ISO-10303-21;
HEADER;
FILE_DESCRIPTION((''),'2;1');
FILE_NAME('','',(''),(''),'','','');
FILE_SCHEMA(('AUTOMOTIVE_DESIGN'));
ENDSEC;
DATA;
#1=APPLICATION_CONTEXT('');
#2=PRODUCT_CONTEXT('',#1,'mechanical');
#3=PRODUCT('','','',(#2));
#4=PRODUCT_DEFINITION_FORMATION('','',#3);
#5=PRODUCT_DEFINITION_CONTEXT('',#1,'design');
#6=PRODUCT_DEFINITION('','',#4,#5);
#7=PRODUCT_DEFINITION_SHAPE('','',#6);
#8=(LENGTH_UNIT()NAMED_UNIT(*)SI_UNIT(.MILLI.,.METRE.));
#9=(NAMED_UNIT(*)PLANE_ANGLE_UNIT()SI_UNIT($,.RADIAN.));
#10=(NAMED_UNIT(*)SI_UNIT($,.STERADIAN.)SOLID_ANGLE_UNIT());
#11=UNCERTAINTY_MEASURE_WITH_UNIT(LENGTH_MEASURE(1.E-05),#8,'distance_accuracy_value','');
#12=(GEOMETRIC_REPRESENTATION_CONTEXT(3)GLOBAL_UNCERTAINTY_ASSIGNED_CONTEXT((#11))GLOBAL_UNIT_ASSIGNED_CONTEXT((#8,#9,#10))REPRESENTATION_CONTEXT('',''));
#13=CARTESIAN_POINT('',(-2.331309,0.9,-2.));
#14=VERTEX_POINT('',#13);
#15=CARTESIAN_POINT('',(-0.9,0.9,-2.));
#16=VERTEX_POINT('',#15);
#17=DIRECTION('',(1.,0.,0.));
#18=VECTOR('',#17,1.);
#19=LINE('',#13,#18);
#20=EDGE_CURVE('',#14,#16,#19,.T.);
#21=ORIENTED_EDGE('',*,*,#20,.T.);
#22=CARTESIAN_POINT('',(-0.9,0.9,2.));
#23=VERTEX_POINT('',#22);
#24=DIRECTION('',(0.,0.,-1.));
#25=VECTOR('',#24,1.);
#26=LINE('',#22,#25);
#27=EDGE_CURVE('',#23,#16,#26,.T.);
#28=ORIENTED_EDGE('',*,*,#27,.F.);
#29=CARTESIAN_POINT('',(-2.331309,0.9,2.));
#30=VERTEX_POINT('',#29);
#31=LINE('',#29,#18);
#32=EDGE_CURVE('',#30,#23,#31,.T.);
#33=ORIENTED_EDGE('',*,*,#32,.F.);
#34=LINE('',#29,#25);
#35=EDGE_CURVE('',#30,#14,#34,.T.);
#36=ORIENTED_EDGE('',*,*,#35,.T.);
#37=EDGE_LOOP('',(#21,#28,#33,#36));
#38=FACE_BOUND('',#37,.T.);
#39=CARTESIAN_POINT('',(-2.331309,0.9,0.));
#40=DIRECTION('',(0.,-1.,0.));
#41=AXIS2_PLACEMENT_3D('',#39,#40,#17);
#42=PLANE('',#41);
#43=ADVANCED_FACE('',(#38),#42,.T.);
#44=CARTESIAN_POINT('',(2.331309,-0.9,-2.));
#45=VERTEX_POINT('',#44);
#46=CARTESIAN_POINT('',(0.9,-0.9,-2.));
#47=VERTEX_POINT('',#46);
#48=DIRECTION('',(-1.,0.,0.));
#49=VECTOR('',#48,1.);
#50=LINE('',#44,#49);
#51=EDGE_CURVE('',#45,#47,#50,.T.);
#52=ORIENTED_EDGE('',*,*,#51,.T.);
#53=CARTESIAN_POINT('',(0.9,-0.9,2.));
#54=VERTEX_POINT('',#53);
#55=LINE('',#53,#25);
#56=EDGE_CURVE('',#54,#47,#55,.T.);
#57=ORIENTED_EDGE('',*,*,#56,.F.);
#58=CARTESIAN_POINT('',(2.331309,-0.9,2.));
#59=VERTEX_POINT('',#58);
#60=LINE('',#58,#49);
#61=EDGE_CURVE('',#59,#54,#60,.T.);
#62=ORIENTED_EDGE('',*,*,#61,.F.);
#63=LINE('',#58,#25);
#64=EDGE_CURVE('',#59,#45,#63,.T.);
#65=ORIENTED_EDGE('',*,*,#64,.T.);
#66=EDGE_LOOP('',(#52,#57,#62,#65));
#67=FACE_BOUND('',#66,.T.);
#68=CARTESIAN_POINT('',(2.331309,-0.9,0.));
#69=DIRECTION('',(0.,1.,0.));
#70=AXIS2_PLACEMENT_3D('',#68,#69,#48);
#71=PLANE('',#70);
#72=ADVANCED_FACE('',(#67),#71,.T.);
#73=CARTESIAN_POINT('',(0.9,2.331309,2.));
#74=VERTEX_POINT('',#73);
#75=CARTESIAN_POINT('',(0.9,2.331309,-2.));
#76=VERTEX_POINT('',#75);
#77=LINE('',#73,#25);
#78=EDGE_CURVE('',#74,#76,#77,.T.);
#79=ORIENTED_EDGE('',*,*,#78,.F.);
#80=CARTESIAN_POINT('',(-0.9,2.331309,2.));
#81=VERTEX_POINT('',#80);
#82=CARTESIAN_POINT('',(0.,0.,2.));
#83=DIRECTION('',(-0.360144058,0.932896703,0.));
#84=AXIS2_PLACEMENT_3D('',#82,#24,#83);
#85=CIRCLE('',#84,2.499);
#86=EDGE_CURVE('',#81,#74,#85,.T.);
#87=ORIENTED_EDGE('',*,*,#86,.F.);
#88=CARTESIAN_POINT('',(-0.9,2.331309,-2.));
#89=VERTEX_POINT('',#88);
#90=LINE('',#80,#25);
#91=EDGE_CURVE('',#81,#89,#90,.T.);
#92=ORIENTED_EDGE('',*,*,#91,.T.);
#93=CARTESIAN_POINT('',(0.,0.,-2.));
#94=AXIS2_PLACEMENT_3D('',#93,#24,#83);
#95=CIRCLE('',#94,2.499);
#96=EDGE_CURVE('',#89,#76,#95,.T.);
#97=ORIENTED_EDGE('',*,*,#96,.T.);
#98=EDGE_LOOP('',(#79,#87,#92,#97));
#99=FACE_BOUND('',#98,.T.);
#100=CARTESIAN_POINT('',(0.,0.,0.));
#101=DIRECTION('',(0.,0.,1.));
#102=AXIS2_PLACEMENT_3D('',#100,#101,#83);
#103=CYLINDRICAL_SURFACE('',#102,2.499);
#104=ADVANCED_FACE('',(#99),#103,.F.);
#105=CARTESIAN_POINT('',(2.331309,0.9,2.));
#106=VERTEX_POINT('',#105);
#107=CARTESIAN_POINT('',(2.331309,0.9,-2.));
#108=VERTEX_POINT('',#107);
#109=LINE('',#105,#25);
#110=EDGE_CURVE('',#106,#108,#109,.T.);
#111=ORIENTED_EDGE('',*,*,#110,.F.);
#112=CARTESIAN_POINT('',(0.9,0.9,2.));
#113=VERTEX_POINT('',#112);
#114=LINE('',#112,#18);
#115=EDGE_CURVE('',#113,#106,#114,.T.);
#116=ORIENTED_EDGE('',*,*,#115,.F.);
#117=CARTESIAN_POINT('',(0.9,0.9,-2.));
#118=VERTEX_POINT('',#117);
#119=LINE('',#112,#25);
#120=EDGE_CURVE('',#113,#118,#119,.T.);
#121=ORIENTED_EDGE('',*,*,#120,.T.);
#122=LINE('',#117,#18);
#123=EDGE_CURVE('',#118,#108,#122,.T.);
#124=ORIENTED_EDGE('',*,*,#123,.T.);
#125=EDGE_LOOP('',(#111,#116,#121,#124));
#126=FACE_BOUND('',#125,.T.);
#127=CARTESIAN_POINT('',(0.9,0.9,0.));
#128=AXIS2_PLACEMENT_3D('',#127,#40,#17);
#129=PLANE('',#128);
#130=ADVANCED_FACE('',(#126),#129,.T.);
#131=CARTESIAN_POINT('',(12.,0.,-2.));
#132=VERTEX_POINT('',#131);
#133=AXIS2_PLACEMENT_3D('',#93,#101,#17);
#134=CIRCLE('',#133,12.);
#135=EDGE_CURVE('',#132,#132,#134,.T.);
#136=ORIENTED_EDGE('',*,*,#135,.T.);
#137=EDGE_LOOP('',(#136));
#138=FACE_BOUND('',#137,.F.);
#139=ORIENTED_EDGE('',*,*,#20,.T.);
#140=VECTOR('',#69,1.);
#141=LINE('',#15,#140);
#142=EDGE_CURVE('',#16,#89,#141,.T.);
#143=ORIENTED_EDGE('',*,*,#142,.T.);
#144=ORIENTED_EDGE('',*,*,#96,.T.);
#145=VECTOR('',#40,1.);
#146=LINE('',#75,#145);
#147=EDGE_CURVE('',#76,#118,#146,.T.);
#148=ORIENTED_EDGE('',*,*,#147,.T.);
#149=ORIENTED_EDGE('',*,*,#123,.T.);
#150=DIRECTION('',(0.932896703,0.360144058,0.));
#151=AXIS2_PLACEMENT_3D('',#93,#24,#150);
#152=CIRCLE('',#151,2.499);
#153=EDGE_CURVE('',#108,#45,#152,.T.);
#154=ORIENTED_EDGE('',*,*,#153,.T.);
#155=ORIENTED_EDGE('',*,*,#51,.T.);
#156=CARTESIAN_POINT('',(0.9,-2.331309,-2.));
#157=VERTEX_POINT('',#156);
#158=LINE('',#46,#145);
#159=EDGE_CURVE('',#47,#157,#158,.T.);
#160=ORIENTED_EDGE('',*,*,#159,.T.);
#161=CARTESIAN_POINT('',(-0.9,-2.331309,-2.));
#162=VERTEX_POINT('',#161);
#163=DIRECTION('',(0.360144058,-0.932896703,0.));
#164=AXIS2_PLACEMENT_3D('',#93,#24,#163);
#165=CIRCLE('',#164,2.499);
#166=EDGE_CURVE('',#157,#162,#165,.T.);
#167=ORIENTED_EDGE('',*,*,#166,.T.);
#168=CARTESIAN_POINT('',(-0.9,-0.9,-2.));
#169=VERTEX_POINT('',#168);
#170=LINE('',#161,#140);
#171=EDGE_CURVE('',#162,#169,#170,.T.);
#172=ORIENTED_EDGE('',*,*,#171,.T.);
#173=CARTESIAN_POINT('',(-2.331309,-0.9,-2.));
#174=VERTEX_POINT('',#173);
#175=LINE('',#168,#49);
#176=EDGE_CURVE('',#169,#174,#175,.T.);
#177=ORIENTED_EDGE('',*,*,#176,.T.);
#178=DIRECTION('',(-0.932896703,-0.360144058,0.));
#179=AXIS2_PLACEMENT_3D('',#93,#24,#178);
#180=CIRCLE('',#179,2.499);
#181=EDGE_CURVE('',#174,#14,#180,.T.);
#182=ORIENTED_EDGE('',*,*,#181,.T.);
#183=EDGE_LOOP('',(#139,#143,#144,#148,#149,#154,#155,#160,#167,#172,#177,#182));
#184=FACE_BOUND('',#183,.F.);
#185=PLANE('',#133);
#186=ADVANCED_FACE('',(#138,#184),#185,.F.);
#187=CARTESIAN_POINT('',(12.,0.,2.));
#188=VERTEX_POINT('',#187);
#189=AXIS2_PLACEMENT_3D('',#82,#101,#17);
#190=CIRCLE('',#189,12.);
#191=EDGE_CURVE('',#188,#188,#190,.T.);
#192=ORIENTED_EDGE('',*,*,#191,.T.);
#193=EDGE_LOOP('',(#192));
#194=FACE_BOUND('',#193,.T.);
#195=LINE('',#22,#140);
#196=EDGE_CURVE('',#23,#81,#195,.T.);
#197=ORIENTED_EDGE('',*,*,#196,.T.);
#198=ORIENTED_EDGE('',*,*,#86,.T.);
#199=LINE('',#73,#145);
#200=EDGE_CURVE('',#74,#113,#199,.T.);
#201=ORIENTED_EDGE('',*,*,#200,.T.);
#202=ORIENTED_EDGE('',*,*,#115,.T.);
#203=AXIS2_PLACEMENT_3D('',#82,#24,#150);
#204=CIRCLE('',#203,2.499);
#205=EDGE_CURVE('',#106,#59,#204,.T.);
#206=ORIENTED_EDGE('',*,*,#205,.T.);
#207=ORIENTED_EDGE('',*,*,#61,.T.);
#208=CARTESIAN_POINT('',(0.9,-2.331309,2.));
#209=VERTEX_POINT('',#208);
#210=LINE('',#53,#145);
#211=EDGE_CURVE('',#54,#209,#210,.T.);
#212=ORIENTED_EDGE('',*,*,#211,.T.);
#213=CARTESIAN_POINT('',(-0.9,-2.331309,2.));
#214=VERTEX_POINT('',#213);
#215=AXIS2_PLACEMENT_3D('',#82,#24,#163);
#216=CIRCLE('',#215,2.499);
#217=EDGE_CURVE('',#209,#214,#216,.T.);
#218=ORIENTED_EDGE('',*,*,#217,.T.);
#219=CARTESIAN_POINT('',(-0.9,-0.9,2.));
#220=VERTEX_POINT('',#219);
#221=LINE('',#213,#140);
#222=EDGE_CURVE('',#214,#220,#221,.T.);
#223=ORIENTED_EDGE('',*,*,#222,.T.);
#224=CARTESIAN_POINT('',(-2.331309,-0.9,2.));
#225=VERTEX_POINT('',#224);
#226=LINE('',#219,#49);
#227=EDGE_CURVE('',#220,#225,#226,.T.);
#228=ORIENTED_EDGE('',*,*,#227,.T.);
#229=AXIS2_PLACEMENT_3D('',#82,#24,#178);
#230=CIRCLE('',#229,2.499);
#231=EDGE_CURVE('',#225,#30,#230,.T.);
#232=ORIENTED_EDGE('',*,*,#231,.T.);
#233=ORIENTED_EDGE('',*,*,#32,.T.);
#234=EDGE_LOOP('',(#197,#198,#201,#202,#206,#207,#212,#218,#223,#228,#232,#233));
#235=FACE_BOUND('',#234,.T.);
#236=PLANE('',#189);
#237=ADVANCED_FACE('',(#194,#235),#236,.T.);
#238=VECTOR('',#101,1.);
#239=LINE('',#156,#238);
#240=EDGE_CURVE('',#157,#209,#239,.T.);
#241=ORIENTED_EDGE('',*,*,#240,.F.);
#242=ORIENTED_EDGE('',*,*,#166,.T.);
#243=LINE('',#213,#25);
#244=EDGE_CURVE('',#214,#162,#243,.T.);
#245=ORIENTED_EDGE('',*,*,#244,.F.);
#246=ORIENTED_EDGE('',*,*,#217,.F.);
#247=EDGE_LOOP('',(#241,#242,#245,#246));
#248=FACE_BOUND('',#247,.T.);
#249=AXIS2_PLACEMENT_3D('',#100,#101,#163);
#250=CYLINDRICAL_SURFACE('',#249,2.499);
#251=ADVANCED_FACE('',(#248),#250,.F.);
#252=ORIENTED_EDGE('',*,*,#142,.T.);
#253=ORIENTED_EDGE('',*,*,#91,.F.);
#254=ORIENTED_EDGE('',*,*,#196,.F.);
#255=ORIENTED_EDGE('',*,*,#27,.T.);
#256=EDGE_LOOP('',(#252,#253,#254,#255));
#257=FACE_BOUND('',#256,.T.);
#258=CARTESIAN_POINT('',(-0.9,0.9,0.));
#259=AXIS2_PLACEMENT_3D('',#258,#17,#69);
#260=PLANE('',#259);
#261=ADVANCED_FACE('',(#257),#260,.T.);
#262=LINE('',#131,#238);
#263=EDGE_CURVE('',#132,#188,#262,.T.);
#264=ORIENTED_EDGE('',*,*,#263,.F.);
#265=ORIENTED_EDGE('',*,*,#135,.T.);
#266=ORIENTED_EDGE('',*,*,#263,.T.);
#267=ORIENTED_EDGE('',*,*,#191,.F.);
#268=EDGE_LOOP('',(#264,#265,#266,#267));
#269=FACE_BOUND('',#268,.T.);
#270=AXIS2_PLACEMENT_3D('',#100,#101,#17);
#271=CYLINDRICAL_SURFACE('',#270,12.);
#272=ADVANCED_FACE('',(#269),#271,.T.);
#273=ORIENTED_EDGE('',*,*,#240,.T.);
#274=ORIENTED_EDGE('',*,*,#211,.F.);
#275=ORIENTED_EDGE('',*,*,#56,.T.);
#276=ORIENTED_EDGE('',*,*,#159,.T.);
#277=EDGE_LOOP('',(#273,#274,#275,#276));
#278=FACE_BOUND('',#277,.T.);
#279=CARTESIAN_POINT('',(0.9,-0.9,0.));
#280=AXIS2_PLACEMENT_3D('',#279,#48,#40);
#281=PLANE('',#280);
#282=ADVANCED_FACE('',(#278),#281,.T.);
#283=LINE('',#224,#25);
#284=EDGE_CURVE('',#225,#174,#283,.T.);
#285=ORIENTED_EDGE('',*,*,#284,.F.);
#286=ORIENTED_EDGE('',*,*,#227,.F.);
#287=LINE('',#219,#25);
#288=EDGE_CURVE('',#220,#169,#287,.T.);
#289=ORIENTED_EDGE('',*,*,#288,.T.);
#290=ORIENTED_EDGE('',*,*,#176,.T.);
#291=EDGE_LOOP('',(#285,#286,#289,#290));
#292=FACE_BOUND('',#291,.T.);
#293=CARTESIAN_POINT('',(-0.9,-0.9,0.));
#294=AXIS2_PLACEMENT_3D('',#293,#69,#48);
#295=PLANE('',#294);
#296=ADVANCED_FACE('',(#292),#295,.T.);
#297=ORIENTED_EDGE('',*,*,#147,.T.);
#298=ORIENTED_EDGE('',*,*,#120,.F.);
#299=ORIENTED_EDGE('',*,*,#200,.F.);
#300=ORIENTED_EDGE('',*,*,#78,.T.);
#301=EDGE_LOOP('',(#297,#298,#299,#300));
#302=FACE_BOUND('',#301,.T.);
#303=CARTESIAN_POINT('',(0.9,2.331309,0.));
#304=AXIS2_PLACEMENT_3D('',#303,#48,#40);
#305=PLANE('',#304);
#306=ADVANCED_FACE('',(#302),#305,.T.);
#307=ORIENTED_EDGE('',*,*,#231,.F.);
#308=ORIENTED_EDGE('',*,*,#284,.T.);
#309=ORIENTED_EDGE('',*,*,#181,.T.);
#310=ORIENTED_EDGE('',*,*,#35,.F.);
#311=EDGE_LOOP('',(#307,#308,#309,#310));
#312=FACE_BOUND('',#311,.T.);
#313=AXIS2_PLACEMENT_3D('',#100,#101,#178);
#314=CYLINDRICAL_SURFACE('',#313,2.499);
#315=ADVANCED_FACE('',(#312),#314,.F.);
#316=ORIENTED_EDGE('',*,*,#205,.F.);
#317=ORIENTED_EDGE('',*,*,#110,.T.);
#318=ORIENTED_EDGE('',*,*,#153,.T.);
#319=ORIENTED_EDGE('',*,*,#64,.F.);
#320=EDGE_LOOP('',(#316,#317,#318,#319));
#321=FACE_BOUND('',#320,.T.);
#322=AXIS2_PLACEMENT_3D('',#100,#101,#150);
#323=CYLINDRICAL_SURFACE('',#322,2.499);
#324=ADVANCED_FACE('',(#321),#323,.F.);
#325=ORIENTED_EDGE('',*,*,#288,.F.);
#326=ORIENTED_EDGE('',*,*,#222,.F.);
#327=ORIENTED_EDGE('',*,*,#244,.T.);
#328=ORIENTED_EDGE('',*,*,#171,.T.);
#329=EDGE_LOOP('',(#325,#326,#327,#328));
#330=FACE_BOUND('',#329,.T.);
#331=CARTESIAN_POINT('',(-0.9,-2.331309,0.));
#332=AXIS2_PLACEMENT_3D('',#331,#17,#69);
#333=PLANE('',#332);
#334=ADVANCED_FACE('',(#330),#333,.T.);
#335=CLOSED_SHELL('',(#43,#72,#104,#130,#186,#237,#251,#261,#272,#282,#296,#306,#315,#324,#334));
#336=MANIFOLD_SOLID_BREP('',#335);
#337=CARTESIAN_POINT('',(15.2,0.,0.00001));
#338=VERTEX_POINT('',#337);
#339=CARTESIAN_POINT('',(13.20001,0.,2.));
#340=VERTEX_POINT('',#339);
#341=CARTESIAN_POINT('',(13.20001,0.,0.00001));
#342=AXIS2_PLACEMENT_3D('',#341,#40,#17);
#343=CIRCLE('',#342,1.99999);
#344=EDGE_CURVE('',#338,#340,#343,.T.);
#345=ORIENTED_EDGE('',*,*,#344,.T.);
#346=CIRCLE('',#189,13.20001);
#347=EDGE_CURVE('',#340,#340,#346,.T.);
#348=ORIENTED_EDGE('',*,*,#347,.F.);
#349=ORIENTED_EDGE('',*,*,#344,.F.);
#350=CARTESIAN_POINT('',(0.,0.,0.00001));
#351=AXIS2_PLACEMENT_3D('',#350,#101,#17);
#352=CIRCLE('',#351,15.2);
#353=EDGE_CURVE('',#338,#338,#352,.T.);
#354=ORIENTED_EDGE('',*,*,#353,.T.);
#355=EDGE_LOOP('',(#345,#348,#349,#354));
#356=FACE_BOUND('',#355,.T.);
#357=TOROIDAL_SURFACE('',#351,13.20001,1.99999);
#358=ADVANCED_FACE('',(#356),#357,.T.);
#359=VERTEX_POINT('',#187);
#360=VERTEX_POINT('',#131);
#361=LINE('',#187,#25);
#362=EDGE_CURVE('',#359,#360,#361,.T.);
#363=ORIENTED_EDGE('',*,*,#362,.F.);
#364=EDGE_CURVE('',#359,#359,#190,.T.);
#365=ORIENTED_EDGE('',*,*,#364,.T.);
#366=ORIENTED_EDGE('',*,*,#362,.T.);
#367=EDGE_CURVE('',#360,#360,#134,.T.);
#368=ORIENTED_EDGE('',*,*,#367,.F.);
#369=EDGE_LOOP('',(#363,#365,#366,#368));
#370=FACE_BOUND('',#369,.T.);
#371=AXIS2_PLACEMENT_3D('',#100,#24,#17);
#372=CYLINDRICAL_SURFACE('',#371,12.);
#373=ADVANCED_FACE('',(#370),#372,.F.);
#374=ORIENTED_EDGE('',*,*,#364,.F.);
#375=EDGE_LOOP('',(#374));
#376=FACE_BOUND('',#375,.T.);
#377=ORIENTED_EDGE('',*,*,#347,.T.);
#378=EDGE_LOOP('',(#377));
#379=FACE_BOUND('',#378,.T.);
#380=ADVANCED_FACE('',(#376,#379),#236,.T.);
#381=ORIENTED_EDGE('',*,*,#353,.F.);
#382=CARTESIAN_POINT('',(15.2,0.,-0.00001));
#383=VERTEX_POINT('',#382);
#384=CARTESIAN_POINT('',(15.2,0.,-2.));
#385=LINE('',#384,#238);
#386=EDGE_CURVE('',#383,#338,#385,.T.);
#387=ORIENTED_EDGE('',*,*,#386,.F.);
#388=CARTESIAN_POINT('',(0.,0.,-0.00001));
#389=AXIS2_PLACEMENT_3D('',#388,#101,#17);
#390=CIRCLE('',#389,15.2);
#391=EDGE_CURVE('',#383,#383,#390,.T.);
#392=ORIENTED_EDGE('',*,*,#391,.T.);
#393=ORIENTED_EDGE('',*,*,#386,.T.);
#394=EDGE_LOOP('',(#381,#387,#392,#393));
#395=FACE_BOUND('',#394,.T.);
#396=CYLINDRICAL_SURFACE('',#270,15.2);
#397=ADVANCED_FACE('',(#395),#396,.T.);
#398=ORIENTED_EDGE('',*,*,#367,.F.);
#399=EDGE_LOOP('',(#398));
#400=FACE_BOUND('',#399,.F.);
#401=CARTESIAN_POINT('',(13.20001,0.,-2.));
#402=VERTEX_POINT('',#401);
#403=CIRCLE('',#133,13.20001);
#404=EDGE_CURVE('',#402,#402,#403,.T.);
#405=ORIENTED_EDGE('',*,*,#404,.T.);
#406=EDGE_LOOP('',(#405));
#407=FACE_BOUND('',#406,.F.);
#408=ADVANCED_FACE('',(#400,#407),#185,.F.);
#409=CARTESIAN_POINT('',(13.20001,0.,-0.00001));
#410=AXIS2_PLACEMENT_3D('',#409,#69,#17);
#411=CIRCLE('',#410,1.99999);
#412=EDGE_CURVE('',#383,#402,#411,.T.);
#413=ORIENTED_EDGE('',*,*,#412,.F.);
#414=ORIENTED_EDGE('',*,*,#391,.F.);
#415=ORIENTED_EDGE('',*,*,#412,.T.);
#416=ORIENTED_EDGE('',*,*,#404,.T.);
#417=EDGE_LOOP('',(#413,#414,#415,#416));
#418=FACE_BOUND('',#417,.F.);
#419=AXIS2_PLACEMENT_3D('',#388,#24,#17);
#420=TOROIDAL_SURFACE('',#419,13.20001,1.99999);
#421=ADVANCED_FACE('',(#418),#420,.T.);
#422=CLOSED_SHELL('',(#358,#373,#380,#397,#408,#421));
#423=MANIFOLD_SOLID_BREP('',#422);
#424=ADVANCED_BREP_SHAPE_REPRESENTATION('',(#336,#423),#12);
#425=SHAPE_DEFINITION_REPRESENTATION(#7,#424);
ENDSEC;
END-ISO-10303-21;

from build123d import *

# Parameters (mm, degrees)
F0_R     = 12
F1_DEPTH = 2
F0_R_2   = 15.2
F2_DEPTH = 2
F3_R     = 1.99999


# Not quite as in the source:
# - a fillet or chamfer is up to 0.001 mm smaller than in the source, because OpenCascade refuses the exact size


with BuildPart() as f1:
    # F0 (on Top) → F1 (new body, symmetric)
    with BuildSketch(Plane.XY):
        Circle(F0_R)
        with BuildLine():
            ThreePointArc((0.9, -2.3313088598), (0, -2.499), (-0.9, -2.3313088598))
            Line((-0.9, -2.3313088598), (-0.9, -0.9))
            Line((-0.9, -0.9), (-2.3313088598, -0.9))
            ThreePointArc((-2.3313088598, -0.9), (-2.499, 0), (-2.3313088598, 0.9))
            Line((-2.3313088598, 0.9), (-0.9, 0.9))
            Line((-0.9, 0.9), (-0.9, 2.3313088598))
            ThreePointArc((-0.9, 2.3313088598), (0, 2.499), (0.9, 2.3313088598))
            Line((0.9, 2.3313088598), (0.9, 0.9))
            Line((0.9, 0.9), (2.3313088598, 0.9))
            ThreePointArc((2.3313088598, 0.9), (2.499, 0), (2.3313088598, -0.9))
            Line((2.3313088598, -0.9), (0.9, -0.9))
            Line((0.9, -0.9), (0.9, -2.3313088598))
        make_face(mode=Mode.SUBTRACT)
    extrude(amount=F1_DEPTH, both=True)


with BuildPart() as f2:
    # F0 (on Top) → F2 (new body, symmetric)
    with BuildSketch(Plane.XY):
        Circle(F0_R_2)
        Circle(F0_R, mode=Mode.SUBTRACT)
    extrude(amount=F2_DEPTH, both=True)

    # F3 (radius 2 in the source; OpenCascade refuses exactly that, so slightly less here)
    f3_edges = [f2.edges().sort_by_distance(p)[0] for p in [
        (-15.2, 0, 2),
        (-15.2, 0, -2),
    ]]
    fillet(f3_edges, radius=F3_R)


solid = Compound([f1.part, f2.part])
